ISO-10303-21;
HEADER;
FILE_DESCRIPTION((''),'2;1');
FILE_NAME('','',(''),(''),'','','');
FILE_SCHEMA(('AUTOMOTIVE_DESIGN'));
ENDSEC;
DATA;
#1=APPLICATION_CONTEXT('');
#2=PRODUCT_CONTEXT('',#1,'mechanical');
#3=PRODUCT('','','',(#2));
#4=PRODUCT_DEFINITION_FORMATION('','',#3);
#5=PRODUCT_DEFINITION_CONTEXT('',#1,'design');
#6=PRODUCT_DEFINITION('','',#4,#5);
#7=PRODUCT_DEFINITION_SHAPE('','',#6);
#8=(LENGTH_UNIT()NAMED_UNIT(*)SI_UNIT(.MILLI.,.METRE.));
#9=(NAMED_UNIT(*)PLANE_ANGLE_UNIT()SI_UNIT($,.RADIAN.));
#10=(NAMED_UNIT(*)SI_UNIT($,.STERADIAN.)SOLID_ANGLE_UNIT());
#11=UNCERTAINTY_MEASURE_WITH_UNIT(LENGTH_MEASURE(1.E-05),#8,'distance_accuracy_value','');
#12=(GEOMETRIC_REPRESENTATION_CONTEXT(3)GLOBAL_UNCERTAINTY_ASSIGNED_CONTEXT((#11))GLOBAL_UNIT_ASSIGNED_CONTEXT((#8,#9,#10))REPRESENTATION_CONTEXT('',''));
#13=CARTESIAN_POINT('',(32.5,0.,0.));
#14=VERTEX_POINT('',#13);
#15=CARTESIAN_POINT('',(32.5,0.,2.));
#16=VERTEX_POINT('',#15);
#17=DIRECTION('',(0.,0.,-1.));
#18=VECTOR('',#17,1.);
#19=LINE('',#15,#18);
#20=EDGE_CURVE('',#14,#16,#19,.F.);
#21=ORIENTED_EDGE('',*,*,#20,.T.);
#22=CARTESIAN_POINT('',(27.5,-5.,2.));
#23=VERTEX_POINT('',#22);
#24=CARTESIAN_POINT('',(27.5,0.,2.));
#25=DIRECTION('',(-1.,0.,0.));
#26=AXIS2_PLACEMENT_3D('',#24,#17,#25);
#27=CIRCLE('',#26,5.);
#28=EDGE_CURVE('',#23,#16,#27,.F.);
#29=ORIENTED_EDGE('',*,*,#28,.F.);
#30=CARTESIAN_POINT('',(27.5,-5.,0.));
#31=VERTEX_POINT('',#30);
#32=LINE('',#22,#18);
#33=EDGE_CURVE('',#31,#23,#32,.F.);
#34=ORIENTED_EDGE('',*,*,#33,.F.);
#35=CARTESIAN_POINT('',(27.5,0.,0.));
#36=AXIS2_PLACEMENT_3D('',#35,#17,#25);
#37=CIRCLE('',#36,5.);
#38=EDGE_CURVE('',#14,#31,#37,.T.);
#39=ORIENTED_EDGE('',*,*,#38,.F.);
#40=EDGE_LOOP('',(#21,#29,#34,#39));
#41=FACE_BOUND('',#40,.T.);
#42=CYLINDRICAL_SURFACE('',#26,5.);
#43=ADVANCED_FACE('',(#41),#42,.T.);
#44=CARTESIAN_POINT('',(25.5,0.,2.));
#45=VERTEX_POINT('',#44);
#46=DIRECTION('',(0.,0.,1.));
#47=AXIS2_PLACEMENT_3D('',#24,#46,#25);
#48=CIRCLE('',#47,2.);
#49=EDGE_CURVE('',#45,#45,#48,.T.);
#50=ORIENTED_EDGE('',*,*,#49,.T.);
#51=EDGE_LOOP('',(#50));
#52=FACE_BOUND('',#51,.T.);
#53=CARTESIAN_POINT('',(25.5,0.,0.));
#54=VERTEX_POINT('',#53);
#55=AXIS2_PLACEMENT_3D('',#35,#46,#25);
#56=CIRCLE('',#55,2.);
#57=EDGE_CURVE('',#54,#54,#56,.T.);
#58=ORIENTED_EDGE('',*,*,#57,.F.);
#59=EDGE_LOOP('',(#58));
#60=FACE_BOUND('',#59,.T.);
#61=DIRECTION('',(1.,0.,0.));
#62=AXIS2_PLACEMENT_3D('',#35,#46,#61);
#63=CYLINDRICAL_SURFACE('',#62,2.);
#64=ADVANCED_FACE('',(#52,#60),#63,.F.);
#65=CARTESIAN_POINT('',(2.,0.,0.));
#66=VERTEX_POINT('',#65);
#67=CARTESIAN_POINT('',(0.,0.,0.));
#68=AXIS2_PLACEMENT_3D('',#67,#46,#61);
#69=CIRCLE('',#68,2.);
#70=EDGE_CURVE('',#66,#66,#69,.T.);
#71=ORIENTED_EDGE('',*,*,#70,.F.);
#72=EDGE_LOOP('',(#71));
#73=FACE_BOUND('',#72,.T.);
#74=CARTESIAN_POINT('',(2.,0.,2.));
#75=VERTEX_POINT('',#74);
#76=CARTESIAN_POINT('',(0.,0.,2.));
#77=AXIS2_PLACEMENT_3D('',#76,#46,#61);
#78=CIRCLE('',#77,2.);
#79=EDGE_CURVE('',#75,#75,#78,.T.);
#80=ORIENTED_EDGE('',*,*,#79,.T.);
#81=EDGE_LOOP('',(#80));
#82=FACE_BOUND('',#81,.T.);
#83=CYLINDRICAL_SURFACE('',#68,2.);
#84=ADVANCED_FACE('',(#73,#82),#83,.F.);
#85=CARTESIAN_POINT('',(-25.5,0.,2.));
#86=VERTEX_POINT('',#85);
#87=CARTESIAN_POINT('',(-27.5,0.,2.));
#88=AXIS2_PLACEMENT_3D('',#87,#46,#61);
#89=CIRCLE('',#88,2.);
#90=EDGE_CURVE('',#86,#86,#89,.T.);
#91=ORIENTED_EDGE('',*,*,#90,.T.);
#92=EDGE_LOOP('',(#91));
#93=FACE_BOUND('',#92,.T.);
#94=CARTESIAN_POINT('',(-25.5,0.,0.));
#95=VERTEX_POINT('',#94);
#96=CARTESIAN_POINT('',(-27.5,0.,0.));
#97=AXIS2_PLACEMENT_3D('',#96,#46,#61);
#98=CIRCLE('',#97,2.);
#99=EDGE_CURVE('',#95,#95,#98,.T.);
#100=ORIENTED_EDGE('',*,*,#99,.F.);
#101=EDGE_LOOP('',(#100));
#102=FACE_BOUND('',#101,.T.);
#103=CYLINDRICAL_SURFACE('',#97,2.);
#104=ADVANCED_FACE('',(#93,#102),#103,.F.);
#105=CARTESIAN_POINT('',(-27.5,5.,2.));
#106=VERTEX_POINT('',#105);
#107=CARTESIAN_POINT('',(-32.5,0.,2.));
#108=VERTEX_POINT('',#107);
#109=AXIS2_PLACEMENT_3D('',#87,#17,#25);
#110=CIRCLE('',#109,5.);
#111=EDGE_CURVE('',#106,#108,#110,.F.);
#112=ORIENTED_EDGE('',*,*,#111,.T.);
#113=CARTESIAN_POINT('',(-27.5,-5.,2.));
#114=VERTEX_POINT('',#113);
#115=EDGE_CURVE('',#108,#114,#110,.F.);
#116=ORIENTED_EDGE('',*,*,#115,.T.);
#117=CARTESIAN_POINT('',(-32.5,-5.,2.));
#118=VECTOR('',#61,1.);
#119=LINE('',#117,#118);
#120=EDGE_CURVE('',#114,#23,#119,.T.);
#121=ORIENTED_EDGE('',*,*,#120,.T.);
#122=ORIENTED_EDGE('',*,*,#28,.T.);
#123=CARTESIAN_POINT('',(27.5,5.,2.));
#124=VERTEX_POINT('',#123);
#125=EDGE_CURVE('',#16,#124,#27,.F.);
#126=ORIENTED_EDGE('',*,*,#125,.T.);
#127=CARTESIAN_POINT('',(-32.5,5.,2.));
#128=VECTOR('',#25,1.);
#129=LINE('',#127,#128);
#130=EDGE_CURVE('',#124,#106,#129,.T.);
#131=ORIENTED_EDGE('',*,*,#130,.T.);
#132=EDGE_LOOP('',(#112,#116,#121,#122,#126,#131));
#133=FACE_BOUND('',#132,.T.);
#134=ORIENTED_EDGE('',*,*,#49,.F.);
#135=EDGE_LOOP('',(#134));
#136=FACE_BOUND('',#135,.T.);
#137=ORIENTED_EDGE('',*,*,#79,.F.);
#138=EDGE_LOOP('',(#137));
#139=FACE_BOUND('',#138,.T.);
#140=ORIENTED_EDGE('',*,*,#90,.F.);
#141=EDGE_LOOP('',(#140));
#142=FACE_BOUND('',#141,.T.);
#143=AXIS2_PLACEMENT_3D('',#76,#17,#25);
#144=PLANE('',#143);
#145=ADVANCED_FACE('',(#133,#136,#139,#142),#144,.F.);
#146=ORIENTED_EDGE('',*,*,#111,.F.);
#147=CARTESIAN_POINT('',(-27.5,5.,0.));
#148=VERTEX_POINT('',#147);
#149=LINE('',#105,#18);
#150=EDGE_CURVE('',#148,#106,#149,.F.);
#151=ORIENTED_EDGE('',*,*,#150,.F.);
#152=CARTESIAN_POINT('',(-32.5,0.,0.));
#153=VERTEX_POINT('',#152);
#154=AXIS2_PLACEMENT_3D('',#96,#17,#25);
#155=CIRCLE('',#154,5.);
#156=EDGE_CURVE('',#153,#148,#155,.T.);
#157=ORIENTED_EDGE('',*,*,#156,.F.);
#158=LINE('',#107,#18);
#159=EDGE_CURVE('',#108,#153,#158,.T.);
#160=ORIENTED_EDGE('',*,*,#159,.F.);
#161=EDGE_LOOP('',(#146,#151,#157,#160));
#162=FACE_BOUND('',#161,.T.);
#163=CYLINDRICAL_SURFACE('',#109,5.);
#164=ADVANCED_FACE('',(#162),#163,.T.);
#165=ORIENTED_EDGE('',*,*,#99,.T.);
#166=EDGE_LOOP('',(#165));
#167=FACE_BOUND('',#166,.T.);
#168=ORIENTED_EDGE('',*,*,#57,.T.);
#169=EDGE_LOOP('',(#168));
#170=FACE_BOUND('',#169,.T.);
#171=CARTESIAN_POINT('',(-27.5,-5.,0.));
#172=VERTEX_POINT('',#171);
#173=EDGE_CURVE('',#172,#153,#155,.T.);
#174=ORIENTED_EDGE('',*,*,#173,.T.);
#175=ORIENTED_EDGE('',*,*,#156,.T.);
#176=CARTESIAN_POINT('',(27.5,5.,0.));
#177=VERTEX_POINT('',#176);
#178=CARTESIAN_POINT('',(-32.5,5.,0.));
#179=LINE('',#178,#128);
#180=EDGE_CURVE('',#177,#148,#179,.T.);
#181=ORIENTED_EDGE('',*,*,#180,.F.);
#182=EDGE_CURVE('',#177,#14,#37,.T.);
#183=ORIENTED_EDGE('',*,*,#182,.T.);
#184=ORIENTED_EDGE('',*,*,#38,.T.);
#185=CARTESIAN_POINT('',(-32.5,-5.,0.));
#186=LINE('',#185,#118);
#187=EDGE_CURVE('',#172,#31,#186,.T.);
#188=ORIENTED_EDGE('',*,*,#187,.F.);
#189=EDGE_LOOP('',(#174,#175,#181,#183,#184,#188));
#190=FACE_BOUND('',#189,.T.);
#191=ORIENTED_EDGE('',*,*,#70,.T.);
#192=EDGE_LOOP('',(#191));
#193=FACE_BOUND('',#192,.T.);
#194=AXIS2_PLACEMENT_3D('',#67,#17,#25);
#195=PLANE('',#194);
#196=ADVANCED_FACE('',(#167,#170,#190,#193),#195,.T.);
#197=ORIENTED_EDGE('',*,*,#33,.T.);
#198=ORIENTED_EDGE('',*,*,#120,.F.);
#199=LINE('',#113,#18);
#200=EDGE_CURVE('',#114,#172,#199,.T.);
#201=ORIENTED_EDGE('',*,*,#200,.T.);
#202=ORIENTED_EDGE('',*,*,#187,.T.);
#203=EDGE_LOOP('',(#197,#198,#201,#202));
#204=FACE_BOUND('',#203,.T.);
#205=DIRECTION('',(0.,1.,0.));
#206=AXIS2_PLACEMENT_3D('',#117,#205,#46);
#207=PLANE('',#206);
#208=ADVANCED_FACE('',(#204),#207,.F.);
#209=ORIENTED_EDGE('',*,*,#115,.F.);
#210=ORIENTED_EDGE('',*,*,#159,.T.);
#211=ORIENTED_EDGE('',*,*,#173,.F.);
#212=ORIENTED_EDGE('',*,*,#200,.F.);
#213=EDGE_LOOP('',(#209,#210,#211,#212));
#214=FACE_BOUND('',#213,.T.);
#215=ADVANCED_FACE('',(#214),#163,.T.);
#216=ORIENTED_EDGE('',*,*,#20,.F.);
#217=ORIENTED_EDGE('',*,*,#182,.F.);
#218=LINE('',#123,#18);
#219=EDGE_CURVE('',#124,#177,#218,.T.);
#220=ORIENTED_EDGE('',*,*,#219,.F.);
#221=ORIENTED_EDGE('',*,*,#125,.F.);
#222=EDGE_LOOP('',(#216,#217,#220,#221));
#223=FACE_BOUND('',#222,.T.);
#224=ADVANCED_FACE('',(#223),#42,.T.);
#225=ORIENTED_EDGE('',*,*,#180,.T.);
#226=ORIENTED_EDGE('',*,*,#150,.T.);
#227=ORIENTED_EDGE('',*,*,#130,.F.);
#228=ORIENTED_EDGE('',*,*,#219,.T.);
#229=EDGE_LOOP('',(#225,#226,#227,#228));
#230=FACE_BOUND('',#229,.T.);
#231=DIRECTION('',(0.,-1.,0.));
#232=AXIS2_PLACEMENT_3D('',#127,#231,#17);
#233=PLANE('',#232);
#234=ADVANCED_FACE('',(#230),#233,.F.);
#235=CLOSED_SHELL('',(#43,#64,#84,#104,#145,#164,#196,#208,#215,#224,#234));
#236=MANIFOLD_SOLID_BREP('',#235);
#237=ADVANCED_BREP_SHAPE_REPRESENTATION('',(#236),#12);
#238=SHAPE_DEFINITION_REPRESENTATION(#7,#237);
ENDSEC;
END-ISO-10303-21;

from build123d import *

# Parameters (mm, degrees)
SKETCH_1_W          = 65
SKETCH_1_H          = 10
EXTRUDE_1_DEPTH     = 2
FILLET_1_R          = 5
SKETCH_3_R          = 2
CUT_EXTRUDE_1_DEPTH = 2


with BuildPart() as part:
    # 草图1 → 凸台-拉伸1 (new body)
    with BuildSketch(Plane.XY):
        Rectangle(SKETCH_1_W, SKETCH_1_H)
    extrude(amount=EXTRUDE_1_DEPTH)

    # 圆角1
    fillet_1_edges = [part.edges().sort_by_distance(p)[0] for p in [
        (32.5, -5, 1),
        (-32.5, -5, 1),
        (-32.5, 5, 1),
        (32.5, 5, 1),
    ]]
    fillet(fillet_1_edges, radius=FILLET_1_R - 0.0001)  # a hair under: the kernel refuses the full size

    # 草图3 → 切除-拉伸1 (cut)
    with BuildSketch(Plane.XY.offset(2)):
        with Locations((-27.5, 0)):
            Circle(SKETCH_3_R)
        with Locations(Location((27.5, 0, 0), (0, 0, 180))):
            Circle(SKETCH_3_R)
        Circle(SKETCH_3_R)
    extrude(amount=-CUT_EXTRUDE_1_DEPTH, mode=Mode.SUBTRACT)


solid = part.part
